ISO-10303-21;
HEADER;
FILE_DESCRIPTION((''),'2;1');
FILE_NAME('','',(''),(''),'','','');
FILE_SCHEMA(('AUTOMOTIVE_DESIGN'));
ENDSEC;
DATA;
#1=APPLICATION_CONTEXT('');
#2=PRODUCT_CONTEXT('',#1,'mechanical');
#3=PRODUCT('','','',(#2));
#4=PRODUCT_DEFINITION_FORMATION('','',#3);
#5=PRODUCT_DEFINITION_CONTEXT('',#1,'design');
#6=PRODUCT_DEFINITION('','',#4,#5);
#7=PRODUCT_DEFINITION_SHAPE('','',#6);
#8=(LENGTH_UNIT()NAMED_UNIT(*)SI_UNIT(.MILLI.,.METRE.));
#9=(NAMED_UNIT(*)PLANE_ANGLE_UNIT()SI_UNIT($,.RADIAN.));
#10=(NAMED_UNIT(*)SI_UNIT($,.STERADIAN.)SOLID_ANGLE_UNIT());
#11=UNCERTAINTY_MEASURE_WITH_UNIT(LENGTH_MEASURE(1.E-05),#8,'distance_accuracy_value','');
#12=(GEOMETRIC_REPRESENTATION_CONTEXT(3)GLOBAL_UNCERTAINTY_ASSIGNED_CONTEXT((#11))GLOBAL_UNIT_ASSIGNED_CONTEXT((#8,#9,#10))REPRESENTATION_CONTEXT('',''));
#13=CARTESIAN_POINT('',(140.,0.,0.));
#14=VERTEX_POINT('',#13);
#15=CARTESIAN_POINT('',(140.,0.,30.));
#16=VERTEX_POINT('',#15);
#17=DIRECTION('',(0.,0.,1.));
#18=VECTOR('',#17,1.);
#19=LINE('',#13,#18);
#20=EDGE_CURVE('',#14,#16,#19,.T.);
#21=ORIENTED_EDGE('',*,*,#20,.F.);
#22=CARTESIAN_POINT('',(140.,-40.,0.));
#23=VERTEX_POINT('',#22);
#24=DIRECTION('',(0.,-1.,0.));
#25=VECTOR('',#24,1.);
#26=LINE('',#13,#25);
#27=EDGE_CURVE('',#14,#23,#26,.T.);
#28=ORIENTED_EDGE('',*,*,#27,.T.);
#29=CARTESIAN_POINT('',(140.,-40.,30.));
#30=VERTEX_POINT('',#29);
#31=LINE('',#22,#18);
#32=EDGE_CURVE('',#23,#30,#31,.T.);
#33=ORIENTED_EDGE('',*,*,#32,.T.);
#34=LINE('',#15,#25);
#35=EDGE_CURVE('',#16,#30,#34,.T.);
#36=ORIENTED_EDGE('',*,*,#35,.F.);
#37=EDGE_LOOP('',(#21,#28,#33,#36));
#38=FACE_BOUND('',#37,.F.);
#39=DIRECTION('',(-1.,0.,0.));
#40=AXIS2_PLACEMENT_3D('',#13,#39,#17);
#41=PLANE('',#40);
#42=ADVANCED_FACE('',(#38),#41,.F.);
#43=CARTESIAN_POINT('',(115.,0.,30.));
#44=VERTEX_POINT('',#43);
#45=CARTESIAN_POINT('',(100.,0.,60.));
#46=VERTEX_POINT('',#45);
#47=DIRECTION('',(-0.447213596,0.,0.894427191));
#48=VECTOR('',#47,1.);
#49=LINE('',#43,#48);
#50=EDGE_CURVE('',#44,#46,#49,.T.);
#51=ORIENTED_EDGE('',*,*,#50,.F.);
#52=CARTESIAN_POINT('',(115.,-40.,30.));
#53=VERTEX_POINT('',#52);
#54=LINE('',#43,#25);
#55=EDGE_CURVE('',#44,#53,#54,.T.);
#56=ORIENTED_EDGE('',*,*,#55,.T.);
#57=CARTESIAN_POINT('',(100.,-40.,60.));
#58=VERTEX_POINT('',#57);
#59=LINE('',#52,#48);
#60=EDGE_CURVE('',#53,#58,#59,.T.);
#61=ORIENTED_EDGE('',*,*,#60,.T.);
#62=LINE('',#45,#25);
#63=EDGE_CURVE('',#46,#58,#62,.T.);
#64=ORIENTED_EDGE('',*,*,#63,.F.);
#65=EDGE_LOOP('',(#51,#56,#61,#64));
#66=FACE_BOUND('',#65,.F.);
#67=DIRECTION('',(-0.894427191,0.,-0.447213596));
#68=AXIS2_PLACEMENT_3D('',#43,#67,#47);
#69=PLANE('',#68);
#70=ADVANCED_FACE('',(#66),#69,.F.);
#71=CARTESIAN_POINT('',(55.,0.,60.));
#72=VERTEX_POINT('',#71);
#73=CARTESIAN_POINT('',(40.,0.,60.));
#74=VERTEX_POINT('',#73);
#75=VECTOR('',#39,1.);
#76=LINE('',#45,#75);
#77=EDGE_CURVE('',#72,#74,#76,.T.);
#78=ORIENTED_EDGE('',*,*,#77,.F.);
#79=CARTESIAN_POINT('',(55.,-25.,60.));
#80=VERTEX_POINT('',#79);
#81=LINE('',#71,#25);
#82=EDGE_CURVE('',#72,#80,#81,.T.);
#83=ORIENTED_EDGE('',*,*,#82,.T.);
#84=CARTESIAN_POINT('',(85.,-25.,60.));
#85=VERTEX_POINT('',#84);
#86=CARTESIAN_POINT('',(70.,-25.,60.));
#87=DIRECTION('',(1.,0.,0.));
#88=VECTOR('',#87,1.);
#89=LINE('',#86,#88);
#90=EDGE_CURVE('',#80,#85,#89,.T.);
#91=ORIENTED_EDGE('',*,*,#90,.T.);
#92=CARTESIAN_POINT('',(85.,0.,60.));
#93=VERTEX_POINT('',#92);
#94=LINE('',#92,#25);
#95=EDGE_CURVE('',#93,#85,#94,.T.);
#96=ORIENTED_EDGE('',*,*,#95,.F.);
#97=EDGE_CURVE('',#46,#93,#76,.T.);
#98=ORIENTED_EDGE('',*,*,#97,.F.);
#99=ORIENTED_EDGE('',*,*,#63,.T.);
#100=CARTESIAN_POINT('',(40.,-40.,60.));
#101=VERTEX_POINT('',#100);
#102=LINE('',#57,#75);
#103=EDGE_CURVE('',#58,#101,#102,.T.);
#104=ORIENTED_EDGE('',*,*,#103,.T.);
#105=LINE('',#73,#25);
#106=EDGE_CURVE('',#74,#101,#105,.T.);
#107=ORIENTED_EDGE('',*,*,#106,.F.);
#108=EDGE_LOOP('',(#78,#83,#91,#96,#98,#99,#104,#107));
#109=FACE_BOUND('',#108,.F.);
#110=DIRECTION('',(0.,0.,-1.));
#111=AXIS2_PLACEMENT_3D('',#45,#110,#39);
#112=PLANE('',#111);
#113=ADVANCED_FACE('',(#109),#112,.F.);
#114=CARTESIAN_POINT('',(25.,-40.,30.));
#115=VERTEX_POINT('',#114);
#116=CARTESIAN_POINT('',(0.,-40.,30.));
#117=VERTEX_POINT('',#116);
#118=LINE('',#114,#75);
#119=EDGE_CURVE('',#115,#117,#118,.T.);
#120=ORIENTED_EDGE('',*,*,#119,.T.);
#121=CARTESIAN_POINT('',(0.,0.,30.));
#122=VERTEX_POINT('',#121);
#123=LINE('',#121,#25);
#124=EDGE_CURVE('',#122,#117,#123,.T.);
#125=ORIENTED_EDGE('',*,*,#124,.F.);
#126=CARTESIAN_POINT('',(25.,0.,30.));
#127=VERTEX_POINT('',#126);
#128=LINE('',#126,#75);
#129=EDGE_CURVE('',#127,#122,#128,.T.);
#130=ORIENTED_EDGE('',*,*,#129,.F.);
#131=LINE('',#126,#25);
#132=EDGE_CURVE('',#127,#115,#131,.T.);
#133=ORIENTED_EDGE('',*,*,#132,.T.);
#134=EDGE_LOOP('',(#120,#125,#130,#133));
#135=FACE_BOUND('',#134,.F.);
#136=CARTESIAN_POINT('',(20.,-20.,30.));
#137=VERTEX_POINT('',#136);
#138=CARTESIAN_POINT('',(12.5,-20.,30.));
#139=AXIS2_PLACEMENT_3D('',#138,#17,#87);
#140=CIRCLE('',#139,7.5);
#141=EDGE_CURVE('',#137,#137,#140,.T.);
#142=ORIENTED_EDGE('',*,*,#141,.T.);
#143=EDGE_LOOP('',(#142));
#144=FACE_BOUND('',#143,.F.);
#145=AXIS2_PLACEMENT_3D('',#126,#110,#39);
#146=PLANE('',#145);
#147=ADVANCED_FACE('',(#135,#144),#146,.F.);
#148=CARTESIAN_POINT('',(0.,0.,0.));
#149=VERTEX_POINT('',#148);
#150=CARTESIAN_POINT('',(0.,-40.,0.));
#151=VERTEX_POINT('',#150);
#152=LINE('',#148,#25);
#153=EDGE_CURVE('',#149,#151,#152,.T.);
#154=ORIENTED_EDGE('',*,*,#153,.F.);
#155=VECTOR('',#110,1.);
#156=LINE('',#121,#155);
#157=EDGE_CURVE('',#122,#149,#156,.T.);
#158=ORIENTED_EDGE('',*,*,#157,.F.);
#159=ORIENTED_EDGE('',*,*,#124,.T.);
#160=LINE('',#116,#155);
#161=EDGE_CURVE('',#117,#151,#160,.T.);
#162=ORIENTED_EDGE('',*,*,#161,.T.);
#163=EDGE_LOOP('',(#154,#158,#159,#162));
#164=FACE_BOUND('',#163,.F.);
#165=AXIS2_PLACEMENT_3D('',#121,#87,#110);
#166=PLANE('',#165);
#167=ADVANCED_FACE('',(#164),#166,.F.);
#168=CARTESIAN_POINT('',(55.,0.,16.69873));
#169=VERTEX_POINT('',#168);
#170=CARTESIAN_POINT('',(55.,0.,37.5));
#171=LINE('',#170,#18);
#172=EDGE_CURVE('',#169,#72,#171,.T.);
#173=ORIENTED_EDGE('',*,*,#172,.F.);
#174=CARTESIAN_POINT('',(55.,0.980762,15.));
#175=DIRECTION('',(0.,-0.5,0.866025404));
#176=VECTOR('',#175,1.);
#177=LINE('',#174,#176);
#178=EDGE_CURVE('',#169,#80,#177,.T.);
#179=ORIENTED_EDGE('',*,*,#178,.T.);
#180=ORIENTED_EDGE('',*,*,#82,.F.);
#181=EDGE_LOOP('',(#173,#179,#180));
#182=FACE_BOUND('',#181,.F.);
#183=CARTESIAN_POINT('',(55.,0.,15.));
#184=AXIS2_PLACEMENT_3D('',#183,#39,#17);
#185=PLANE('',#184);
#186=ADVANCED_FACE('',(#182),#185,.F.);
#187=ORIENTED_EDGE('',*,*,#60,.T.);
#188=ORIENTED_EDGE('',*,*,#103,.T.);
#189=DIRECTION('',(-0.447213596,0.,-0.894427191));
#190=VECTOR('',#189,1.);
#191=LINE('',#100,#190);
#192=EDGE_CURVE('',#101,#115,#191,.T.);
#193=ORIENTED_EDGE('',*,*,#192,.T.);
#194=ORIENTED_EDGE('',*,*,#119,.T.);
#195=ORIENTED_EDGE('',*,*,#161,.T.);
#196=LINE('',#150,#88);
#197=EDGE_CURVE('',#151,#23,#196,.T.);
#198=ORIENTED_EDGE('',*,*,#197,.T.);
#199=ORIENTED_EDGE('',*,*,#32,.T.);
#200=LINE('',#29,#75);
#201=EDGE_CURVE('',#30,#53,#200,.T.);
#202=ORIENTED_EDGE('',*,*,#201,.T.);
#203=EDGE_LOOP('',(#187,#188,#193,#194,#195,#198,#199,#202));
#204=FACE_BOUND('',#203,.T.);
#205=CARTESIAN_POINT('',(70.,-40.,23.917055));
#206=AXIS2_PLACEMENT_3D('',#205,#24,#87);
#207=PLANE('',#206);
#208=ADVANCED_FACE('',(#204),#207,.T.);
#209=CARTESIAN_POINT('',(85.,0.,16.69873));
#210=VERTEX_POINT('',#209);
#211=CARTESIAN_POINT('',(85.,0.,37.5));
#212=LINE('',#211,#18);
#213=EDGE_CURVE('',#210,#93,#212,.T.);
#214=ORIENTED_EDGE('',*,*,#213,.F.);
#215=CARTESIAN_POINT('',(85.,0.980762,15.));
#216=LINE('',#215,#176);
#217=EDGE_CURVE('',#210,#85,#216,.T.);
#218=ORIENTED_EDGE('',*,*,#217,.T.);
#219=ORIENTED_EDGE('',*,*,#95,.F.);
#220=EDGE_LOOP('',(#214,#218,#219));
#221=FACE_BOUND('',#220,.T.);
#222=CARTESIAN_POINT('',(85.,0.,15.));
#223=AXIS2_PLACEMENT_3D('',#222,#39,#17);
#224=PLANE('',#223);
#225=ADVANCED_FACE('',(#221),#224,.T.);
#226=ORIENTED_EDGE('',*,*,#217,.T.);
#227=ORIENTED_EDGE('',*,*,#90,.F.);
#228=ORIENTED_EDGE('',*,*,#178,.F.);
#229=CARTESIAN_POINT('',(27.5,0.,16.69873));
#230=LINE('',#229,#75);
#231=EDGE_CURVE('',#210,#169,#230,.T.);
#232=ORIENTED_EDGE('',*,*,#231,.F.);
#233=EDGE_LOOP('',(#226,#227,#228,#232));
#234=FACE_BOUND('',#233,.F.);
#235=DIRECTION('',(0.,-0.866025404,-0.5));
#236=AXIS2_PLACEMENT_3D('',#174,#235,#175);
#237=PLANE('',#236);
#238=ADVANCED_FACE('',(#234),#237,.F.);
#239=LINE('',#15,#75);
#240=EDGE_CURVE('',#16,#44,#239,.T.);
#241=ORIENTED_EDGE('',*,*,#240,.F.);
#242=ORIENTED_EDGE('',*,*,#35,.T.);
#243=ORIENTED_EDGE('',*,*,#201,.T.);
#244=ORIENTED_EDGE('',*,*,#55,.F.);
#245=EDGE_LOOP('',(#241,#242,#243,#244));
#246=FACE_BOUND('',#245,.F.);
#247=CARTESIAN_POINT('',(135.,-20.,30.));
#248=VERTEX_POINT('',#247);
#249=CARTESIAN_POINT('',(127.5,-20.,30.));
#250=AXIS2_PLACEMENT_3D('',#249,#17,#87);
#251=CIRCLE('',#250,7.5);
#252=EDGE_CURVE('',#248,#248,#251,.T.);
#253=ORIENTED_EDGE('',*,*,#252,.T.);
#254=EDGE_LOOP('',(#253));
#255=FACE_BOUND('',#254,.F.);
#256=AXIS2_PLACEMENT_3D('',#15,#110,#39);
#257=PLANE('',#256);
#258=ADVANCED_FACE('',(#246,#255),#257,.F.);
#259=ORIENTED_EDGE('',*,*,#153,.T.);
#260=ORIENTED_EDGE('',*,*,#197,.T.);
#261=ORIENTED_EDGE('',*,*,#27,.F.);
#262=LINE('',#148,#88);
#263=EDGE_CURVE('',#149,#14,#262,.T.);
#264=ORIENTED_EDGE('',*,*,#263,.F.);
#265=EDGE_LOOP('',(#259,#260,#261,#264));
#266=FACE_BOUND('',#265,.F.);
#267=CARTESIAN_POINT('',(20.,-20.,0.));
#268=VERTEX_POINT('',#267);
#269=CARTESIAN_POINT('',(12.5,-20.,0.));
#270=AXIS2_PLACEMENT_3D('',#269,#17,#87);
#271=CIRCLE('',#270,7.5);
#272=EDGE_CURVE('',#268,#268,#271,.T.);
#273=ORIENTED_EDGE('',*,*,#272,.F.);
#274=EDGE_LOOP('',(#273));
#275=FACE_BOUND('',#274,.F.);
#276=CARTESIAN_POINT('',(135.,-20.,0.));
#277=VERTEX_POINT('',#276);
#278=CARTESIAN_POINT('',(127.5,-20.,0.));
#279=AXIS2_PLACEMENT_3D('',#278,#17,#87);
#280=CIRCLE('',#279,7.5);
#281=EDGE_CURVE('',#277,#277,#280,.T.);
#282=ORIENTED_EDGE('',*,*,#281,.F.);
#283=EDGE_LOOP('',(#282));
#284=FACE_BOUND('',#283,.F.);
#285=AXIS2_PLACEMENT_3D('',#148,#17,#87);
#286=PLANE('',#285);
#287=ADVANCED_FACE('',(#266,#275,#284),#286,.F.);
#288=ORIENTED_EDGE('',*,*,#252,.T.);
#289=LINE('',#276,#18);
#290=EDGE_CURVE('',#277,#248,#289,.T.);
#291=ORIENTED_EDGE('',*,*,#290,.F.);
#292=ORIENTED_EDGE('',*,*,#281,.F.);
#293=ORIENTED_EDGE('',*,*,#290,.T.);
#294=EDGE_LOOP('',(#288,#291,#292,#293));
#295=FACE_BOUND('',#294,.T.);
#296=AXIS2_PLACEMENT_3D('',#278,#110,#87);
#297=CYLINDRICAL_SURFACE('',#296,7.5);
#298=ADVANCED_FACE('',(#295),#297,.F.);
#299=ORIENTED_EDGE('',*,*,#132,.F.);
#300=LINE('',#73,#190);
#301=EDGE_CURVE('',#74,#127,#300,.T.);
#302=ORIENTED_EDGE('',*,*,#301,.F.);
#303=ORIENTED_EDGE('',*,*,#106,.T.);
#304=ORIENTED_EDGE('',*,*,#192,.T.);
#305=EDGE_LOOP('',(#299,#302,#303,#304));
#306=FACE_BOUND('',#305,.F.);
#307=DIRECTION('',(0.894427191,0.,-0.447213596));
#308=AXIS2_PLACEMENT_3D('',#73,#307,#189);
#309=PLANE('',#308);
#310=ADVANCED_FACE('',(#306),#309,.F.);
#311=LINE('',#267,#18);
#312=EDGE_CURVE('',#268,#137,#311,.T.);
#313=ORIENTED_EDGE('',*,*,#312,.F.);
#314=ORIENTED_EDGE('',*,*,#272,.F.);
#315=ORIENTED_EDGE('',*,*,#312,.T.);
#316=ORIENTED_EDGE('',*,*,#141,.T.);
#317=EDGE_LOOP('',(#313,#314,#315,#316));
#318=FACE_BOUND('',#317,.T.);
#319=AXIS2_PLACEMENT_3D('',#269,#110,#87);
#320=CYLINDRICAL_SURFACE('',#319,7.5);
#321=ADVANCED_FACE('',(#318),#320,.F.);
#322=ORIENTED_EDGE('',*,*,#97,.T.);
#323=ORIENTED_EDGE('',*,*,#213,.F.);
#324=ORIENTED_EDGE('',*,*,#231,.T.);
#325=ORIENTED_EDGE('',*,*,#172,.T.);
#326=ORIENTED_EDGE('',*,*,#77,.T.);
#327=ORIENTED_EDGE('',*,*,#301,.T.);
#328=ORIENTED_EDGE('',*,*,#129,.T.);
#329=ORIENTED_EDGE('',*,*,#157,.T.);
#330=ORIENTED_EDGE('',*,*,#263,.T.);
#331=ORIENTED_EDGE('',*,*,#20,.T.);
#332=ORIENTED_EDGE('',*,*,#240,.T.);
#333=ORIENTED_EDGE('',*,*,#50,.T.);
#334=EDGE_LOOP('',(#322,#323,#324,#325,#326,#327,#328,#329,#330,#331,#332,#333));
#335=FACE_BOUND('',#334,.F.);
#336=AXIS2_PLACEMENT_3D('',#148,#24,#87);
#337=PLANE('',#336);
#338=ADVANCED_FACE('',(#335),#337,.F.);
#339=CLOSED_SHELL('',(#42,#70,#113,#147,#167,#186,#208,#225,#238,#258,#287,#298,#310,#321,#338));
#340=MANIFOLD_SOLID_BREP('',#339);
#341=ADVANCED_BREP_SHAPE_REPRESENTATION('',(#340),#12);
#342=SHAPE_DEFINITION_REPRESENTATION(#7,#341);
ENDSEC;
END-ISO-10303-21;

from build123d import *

# Parameters (mm, degrees)
F1_DEPTH    = 40
F2_W        = 30
F2_H        = 45
F3_DEPTH    = 25
F4_T4_DEPTH = 30
F5_R        = 7.5
F6_DEPTH    = 30


# Not quite as in the source:
# - a fillet or chamfer that OpenCascade refuses, or shapes differently, is made with other operations: its cross-section is extruded or revolved along the edge and cut away or added


with BuildPart() as f1:
    # F0 (on Front) → F1 (new body)
    with BuildSketch(Plane.XZ):
        Polygon((0, 30), (0, 0), (140, 0), (140, 30), (115, 30), (100, 60), (85, 60), (55, 60), (40, 60), (25, 30), align=None)
    extrude(amount=F1_DEPTH)

    # F2 (on Front) → F3 (cut)
    with BuildSketch(Plane.XZ):
        with Locations((70, 37.5)):
            Rectangle(F2_W, F2_H)
    extrude(amount=F3_DEPTH, mode=Mode.SUBTRACT)

    # F4: chamfer of 45 x 25.9807621135 on 1 edges, made by hand


with BuildPart() as f4_tool2:
    # F4_s3 → F4_t4 (new body)
    with BuildSketch(Plane.YZ.offset(55)):
        Polygon((0.9807621135, 15), (-25, 60), (-25, 15), align=None)
    extrude(amount=F4_T4_DEPTH)

    split(bisect_by=Plane.XZ, keep=Keep.TOP)

    split(bisect_by=Plane.XY.offset(60), keep=Keep.BOTTOM)


with BuildPart() as f1_1:
    add(f1.part)

    # F4_t1: union F4_tool2
    add(f4_tool2.part)

    # F5 (on Top) → F6 (cut)
    with BuildSketch(Plane.XY):
        with Locations((127.5, -20)):
            Circle(F5_R)
        with BuildLine():
            ThreePointArc((12.5, -12.5), (7.1966991411, -25.3033008589), (20, -20))
            ThreePointArc((20, -20), (17.8033008589, -14.6966991411), (12.5, -12.5))
        make_face()
    extrude(amount=F6_DEPTH, mode=Mode.SUBTRACT)


solid = f1_1.part
